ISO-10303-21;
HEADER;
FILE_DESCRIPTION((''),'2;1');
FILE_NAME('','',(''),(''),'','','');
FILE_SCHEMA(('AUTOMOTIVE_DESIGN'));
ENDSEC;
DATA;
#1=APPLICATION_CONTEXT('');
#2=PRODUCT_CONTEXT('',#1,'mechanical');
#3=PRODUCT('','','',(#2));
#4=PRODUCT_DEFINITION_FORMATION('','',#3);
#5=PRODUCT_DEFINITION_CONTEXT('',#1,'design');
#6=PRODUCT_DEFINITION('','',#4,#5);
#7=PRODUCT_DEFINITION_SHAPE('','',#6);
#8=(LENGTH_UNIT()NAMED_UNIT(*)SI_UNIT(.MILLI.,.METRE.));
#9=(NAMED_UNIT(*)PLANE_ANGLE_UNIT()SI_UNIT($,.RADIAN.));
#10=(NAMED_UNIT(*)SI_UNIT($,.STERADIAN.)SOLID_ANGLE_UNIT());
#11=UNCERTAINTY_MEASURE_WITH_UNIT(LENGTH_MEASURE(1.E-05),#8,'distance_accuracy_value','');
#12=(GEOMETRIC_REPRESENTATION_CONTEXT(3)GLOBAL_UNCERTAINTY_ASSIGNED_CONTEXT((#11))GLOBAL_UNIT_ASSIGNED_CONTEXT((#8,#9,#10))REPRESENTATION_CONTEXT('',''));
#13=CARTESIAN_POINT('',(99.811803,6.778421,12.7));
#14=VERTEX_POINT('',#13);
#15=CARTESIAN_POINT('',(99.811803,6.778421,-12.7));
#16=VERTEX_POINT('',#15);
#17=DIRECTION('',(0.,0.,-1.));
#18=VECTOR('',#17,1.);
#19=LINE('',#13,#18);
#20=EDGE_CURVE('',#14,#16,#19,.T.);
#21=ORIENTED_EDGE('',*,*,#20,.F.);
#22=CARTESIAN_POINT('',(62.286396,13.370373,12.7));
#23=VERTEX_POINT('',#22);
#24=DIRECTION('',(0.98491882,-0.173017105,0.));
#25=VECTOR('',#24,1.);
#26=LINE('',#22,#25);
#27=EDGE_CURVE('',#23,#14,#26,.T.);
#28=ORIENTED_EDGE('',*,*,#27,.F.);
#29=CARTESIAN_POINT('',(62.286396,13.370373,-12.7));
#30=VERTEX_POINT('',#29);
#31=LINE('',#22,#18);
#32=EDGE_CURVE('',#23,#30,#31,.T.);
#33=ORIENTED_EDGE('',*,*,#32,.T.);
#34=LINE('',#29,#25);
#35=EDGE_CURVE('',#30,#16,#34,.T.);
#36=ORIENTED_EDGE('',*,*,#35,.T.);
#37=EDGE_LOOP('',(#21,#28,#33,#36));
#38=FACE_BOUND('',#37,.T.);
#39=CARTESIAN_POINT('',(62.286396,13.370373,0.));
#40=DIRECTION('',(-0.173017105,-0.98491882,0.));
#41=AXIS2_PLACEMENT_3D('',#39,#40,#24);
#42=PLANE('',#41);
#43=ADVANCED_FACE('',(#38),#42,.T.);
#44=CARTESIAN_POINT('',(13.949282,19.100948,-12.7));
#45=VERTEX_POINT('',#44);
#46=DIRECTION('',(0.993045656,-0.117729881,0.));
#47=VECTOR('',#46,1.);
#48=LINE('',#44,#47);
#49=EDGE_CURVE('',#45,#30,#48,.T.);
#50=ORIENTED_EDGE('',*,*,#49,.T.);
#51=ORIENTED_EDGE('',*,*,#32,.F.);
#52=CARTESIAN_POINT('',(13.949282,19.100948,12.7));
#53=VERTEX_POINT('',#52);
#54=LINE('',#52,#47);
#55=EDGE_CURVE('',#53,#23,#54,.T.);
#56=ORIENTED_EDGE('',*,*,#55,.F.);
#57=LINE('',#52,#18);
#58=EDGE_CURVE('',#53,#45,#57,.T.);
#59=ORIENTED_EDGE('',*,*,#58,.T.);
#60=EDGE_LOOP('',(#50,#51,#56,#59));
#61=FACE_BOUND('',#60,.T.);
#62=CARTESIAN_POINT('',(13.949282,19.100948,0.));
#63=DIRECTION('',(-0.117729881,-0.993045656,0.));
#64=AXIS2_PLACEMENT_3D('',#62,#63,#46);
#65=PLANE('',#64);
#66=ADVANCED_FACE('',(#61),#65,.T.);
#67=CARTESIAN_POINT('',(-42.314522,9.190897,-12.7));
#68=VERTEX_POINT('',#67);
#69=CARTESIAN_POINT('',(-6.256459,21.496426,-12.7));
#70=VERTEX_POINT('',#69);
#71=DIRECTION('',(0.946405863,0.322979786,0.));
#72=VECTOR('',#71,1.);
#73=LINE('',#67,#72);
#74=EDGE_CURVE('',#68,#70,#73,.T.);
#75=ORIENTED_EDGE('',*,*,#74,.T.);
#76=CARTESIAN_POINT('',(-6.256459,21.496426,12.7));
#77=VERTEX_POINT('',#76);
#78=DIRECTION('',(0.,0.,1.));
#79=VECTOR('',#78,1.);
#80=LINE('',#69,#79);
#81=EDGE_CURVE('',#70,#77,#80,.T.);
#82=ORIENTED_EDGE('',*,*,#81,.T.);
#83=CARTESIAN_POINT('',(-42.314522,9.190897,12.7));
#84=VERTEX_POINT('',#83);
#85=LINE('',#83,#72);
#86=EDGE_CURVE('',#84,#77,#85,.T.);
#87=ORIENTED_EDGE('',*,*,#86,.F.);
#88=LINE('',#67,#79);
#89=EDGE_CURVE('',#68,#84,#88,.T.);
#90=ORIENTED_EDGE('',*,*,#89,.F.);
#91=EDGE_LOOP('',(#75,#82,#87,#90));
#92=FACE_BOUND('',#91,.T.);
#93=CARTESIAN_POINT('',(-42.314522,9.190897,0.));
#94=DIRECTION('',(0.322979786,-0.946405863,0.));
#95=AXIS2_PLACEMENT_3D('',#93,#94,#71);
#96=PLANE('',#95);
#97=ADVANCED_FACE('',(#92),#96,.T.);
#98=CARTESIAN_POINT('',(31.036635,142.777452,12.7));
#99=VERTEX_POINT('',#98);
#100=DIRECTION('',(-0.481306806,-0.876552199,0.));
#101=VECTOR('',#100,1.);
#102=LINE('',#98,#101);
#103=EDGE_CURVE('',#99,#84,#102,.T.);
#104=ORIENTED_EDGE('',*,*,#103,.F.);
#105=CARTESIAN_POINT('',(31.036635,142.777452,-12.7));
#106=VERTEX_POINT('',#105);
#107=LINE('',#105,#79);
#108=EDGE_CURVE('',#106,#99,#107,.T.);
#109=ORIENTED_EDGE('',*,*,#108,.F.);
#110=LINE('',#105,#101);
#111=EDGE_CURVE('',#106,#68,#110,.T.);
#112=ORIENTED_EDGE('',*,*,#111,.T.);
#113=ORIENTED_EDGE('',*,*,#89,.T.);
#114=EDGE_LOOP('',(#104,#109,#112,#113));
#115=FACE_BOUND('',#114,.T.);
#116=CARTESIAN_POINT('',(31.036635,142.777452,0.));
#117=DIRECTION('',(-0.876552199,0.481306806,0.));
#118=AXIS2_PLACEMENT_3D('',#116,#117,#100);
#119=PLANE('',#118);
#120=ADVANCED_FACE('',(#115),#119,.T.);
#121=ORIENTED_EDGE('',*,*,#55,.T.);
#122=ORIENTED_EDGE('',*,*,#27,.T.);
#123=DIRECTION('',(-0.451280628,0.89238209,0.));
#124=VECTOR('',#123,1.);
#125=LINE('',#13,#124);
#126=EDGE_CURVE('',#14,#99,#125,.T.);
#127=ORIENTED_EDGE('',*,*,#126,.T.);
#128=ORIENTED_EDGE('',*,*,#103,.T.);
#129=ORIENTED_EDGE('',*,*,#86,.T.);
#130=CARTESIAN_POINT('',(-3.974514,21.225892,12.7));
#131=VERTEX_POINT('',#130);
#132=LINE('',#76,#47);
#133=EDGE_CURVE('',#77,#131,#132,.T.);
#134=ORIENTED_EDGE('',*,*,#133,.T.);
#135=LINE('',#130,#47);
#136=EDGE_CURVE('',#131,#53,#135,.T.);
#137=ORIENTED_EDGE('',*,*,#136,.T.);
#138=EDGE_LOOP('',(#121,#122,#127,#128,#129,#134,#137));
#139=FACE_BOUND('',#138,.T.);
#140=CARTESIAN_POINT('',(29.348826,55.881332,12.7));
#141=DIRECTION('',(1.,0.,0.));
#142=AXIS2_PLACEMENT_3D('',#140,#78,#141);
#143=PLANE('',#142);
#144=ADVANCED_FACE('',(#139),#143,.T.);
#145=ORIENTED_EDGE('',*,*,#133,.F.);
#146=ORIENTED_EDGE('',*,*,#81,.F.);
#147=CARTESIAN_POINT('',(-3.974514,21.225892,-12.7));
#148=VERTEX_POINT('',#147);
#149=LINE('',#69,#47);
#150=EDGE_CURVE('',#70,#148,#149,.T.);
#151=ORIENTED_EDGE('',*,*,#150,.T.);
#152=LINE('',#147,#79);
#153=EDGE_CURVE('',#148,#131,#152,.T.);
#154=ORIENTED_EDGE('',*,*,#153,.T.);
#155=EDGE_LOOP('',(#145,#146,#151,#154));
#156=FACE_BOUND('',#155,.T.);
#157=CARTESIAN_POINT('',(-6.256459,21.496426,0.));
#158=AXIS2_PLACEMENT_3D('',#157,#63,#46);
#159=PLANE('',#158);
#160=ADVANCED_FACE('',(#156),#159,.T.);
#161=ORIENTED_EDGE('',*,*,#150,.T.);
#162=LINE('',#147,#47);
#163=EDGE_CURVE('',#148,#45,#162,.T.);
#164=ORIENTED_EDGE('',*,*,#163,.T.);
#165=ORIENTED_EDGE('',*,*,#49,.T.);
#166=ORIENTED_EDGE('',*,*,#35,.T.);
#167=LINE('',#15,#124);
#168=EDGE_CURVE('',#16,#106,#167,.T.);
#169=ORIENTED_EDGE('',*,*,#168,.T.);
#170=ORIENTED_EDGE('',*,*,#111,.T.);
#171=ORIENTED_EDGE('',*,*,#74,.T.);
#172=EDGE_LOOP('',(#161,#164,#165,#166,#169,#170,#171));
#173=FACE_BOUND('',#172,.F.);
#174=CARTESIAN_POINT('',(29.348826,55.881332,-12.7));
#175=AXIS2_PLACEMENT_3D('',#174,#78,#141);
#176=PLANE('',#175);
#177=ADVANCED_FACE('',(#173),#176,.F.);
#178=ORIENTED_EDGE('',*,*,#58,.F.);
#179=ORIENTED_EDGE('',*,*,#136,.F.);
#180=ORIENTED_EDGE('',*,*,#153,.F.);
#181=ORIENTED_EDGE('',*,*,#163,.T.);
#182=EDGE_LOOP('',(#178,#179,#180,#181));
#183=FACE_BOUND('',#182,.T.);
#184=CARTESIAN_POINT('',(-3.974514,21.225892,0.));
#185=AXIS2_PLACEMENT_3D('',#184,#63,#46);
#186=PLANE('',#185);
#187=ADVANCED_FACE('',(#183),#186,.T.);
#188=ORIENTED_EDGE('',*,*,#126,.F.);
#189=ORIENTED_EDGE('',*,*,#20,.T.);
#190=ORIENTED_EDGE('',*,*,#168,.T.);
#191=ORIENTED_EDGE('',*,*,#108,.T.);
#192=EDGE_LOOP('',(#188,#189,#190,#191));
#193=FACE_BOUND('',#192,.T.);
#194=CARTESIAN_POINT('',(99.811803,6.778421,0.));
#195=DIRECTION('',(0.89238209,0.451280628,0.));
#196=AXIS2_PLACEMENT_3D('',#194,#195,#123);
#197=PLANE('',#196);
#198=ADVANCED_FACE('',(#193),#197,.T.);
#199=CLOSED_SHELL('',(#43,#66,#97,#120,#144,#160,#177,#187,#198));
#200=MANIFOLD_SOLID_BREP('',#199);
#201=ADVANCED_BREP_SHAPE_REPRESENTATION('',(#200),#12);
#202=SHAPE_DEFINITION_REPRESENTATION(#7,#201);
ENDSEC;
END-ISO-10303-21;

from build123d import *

# Parameters (mm, degrees)
F3_DEPTH = 12.7


# Not quite as in the source:
# - the program builds the solid bodies; features that only make, move or delete a surface that nothing else refers to are left out


with BuildPart() as f3:
    # F2 (on Top) → F3 (new body, symmetric)
    with BuildSketch(Plane.XY):
        Polygon((99.811803078, 6.778421212), (31.0366353027, 142.777451714), (-42.3145219684, 9.190896526), (-6.2564585871, 21.4964263885), (-3.9745137148, 21.2258919009), (13.9492820705, 19.1009479701), (62.2863960487, 13.370372917), align=None)
    extrude(amount=F3_DEPTH, both=True)


solid = f3.part
